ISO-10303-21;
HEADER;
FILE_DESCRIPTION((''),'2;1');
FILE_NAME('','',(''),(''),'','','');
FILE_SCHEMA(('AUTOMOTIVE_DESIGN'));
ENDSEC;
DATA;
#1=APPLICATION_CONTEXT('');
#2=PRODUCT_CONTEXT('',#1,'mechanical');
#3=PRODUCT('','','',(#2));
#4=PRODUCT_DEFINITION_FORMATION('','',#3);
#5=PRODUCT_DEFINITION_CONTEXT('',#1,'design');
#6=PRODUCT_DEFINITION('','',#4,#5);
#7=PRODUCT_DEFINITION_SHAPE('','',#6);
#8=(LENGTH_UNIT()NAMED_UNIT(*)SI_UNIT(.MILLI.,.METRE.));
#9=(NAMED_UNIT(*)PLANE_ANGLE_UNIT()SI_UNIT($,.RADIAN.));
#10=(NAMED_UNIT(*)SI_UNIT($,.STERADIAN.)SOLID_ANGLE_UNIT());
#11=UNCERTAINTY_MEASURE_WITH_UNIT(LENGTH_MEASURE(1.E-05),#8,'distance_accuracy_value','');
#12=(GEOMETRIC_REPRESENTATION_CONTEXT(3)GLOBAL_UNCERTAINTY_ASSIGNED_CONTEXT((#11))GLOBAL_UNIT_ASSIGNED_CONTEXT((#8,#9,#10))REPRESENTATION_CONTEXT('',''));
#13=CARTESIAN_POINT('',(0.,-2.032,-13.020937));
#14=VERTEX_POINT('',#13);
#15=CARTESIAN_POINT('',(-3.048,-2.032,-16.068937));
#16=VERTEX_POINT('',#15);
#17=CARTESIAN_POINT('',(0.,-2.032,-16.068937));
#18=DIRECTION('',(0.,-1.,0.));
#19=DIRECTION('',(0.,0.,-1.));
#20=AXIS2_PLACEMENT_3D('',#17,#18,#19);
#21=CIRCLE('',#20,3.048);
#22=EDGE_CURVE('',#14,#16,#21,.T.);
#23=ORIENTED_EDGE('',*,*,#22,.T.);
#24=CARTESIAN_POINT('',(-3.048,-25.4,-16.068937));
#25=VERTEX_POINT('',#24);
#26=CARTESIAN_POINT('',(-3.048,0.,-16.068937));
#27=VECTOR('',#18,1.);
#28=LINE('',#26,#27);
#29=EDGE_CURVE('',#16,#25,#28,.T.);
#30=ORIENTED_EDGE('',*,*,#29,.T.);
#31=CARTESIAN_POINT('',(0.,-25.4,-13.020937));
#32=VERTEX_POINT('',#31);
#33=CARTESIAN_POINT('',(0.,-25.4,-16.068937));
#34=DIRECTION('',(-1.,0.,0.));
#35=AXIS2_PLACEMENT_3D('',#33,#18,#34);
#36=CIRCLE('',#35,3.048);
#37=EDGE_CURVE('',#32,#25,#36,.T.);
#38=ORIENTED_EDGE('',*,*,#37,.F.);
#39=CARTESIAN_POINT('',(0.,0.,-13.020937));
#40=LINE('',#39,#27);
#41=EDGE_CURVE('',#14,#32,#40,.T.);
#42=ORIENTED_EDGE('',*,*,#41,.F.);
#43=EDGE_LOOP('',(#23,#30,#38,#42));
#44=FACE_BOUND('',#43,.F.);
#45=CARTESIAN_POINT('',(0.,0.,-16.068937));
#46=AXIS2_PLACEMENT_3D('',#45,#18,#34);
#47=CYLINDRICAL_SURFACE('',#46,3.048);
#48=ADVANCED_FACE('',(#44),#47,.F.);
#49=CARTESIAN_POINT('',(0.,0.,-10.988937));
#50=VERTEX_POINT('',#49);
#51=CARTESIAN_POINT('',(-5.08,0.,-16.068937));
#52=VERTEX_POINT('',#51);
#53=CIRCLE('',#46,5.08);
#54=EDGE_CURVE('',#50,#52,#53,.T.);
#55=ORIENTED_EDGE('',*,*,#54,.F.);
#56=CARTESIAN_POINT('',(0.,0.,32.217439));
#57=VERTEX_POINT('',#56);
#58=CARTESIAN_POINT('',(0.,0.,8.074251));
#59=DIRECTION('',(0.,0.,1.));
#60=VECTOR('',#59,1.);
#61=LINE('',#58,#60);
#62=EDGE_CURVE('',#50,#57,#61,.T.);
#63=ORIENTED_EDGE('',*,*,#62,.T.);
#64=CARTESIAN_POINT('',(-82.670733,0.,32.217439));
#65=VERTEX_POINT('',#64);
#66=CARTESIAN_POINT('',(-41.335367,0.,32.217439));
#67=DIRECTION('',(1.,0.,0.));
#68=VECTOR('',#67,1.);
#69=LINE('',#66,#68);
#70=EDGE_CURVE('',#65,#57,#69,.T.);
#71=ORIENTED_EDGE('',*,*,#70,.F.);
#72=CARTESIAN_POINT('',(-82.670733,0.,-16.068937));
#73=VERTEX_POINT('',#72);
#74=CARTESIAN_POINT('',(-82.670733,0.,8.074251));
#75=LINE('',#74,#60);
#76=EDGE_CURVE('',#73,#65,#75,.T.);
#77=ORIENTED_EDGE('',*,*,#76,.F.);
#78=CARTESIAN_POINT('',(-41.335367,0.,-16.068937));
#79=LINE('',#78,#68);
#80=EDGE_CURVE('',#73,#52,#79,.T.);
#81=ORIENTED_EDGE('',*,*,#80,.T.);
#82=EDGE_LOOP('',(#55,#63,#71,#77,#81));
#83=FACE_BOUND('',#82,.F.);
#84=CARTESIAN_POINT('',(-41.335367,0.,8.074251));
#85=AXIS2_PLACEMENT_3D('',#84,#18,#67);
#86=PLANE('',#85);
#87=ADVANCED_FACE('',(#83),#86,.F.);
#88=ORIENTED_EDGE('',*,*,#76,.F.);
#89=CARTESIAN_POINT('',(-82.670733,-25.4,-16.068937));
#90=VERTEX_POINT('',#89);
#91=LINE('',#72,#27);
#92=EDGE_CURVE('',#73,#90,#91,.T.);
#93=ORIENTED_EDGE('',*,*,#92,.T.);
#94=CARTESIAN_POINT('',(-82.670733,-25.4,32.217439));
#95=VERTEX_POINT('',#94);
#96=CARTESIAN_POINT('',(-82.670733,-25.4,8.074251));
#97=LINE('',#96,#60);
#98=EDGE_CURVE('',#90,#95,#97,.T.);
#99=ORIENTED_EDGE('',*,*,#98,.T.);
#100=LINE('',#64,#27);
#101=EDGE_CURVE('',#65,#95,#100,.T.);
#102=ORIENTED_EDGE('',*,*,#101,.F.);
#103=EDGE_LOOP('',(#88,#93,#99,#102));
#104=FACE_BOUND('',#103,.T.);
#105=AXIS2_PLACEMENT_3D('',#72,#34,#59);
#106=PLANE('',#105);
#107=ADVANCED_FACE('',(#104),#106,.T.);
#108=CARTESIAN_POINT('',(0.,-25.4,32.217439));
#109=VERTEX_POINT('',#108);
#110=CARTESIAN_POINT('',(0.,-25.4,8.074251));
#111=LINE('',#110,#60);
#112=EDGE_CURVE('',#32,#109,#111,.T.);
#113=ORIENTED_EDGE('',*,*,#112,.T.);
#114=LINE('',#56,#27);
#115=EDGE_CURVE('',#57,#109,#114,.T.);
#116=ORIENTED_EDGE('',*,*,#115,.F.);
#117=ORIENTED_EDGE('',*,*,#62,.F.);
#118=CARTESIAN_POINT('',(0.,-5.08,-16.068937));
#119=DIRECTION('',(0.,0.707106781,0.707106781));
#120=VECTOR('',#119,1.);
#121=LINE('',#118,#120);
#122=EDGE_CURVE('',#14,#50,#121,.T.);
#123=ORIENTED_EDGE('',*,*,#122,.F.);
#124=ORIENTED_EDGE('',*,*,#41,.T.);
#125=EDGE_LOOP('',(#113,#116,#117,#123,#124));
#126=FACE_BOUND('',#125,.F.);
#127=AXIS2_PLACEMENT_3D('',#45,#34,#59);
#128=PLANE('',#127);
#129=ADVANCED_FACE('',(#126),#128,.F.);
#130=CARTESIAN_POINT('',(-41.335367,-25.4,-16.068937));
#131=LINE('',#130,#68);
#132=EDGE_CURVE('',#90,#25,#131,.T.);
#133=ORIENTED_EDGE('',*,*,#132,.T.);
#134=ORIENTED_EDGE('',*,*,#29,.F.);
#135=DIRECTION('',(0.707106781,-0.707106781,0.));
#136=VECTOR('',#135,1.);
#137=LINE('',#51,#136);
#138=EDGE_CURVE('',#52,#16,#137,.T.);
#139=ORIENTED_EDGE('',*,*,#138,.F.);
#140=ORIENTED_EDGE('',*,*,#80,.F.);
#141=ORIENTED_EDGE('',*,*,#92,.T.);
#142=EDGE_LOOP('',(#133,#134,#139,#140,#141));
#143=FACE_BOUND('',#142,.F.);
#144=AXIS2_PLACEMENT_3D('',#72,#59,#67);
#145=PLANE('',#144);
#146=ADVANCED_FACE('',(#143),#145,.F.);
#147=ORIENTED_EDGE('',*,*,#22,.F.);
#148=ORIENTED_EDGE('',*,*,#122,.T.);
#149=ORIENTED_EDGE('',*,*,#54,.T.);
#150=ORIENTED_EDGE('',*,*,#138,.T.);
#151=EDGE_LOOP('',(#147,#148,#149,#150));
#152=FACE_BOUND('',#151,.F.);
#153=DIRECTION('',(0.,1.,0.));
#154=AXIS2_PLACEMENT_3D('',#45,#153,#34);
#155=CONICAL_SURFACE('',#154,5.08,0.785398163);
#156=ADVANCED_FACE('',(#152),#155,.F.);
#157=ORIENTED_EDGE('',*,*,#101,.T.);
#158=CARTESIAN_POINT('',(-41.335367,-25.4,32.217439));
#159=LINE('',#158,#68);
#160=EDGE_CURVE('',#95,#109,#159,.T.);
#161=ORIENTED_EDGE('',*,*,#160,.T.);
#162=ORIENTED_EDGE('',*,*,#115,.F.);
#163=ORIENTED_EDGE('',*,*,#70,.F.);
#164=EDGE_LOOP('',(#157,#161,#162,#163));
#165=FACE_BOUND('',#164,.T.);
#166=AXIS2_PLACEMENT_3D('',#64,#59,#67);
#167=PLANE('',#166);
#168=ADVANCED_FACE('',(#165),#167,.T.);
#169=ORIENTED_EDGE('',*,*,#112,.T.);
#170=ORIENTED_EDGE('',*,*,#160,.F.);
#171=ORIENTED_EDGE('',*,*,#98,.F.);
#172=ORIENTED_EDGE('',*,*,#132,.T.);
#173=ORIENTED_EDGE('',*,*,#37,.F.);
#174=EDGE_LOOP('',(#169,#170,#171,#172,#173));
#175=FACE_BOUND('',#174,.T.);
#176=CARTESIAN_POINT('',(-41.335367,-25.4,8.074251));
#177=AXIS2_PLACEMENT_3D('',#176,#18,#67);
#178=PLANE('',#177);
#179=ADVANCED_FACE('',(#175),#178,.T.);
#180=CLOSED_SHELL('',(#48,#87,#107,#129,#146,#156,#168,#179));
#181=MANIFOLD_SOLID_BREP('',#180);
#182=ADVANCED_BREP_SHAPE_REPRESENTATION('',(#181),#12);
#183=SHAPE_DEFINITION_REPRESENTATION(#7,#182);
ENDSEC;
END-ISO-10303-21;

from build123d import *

# Parameters (mm, degrees)
F1_W           = 82.6707333326
F1_H           = 48.286376521
F2_DEPTH       = 25.4
F3_D           = 6.096
F3_CSINK_D     = 10.16
F3_CSINK_ANGLE = 90


# Not quite as in the source:
# - a variable given as a bare number and used for a length is read in inches; the dataset says mm whatever the document's units were


with BuildPart() as f2:
    # F1 (on Front) → F2 (new body)
    with BuildSketch(Plane.XZ):
        with Locations((-41.3353666663, 8.0742510036)):
            Rectangle(F1_W, F1_H)
    extrude(amount=F2_DEPTH)

    # F3 (through all)
    with Locations(Plane(origin=(0, 0, 0), x_dir=(1, 0, 0), z_dir=(0, 1, 0))):
        with Locations((0, 16.0689372569)):
            CounterSinkHole(F3_D / 2, F3_CSINK_D / 2, counter_sink_angle=F3_CSINK_ANGLE)


solid = f2.part
